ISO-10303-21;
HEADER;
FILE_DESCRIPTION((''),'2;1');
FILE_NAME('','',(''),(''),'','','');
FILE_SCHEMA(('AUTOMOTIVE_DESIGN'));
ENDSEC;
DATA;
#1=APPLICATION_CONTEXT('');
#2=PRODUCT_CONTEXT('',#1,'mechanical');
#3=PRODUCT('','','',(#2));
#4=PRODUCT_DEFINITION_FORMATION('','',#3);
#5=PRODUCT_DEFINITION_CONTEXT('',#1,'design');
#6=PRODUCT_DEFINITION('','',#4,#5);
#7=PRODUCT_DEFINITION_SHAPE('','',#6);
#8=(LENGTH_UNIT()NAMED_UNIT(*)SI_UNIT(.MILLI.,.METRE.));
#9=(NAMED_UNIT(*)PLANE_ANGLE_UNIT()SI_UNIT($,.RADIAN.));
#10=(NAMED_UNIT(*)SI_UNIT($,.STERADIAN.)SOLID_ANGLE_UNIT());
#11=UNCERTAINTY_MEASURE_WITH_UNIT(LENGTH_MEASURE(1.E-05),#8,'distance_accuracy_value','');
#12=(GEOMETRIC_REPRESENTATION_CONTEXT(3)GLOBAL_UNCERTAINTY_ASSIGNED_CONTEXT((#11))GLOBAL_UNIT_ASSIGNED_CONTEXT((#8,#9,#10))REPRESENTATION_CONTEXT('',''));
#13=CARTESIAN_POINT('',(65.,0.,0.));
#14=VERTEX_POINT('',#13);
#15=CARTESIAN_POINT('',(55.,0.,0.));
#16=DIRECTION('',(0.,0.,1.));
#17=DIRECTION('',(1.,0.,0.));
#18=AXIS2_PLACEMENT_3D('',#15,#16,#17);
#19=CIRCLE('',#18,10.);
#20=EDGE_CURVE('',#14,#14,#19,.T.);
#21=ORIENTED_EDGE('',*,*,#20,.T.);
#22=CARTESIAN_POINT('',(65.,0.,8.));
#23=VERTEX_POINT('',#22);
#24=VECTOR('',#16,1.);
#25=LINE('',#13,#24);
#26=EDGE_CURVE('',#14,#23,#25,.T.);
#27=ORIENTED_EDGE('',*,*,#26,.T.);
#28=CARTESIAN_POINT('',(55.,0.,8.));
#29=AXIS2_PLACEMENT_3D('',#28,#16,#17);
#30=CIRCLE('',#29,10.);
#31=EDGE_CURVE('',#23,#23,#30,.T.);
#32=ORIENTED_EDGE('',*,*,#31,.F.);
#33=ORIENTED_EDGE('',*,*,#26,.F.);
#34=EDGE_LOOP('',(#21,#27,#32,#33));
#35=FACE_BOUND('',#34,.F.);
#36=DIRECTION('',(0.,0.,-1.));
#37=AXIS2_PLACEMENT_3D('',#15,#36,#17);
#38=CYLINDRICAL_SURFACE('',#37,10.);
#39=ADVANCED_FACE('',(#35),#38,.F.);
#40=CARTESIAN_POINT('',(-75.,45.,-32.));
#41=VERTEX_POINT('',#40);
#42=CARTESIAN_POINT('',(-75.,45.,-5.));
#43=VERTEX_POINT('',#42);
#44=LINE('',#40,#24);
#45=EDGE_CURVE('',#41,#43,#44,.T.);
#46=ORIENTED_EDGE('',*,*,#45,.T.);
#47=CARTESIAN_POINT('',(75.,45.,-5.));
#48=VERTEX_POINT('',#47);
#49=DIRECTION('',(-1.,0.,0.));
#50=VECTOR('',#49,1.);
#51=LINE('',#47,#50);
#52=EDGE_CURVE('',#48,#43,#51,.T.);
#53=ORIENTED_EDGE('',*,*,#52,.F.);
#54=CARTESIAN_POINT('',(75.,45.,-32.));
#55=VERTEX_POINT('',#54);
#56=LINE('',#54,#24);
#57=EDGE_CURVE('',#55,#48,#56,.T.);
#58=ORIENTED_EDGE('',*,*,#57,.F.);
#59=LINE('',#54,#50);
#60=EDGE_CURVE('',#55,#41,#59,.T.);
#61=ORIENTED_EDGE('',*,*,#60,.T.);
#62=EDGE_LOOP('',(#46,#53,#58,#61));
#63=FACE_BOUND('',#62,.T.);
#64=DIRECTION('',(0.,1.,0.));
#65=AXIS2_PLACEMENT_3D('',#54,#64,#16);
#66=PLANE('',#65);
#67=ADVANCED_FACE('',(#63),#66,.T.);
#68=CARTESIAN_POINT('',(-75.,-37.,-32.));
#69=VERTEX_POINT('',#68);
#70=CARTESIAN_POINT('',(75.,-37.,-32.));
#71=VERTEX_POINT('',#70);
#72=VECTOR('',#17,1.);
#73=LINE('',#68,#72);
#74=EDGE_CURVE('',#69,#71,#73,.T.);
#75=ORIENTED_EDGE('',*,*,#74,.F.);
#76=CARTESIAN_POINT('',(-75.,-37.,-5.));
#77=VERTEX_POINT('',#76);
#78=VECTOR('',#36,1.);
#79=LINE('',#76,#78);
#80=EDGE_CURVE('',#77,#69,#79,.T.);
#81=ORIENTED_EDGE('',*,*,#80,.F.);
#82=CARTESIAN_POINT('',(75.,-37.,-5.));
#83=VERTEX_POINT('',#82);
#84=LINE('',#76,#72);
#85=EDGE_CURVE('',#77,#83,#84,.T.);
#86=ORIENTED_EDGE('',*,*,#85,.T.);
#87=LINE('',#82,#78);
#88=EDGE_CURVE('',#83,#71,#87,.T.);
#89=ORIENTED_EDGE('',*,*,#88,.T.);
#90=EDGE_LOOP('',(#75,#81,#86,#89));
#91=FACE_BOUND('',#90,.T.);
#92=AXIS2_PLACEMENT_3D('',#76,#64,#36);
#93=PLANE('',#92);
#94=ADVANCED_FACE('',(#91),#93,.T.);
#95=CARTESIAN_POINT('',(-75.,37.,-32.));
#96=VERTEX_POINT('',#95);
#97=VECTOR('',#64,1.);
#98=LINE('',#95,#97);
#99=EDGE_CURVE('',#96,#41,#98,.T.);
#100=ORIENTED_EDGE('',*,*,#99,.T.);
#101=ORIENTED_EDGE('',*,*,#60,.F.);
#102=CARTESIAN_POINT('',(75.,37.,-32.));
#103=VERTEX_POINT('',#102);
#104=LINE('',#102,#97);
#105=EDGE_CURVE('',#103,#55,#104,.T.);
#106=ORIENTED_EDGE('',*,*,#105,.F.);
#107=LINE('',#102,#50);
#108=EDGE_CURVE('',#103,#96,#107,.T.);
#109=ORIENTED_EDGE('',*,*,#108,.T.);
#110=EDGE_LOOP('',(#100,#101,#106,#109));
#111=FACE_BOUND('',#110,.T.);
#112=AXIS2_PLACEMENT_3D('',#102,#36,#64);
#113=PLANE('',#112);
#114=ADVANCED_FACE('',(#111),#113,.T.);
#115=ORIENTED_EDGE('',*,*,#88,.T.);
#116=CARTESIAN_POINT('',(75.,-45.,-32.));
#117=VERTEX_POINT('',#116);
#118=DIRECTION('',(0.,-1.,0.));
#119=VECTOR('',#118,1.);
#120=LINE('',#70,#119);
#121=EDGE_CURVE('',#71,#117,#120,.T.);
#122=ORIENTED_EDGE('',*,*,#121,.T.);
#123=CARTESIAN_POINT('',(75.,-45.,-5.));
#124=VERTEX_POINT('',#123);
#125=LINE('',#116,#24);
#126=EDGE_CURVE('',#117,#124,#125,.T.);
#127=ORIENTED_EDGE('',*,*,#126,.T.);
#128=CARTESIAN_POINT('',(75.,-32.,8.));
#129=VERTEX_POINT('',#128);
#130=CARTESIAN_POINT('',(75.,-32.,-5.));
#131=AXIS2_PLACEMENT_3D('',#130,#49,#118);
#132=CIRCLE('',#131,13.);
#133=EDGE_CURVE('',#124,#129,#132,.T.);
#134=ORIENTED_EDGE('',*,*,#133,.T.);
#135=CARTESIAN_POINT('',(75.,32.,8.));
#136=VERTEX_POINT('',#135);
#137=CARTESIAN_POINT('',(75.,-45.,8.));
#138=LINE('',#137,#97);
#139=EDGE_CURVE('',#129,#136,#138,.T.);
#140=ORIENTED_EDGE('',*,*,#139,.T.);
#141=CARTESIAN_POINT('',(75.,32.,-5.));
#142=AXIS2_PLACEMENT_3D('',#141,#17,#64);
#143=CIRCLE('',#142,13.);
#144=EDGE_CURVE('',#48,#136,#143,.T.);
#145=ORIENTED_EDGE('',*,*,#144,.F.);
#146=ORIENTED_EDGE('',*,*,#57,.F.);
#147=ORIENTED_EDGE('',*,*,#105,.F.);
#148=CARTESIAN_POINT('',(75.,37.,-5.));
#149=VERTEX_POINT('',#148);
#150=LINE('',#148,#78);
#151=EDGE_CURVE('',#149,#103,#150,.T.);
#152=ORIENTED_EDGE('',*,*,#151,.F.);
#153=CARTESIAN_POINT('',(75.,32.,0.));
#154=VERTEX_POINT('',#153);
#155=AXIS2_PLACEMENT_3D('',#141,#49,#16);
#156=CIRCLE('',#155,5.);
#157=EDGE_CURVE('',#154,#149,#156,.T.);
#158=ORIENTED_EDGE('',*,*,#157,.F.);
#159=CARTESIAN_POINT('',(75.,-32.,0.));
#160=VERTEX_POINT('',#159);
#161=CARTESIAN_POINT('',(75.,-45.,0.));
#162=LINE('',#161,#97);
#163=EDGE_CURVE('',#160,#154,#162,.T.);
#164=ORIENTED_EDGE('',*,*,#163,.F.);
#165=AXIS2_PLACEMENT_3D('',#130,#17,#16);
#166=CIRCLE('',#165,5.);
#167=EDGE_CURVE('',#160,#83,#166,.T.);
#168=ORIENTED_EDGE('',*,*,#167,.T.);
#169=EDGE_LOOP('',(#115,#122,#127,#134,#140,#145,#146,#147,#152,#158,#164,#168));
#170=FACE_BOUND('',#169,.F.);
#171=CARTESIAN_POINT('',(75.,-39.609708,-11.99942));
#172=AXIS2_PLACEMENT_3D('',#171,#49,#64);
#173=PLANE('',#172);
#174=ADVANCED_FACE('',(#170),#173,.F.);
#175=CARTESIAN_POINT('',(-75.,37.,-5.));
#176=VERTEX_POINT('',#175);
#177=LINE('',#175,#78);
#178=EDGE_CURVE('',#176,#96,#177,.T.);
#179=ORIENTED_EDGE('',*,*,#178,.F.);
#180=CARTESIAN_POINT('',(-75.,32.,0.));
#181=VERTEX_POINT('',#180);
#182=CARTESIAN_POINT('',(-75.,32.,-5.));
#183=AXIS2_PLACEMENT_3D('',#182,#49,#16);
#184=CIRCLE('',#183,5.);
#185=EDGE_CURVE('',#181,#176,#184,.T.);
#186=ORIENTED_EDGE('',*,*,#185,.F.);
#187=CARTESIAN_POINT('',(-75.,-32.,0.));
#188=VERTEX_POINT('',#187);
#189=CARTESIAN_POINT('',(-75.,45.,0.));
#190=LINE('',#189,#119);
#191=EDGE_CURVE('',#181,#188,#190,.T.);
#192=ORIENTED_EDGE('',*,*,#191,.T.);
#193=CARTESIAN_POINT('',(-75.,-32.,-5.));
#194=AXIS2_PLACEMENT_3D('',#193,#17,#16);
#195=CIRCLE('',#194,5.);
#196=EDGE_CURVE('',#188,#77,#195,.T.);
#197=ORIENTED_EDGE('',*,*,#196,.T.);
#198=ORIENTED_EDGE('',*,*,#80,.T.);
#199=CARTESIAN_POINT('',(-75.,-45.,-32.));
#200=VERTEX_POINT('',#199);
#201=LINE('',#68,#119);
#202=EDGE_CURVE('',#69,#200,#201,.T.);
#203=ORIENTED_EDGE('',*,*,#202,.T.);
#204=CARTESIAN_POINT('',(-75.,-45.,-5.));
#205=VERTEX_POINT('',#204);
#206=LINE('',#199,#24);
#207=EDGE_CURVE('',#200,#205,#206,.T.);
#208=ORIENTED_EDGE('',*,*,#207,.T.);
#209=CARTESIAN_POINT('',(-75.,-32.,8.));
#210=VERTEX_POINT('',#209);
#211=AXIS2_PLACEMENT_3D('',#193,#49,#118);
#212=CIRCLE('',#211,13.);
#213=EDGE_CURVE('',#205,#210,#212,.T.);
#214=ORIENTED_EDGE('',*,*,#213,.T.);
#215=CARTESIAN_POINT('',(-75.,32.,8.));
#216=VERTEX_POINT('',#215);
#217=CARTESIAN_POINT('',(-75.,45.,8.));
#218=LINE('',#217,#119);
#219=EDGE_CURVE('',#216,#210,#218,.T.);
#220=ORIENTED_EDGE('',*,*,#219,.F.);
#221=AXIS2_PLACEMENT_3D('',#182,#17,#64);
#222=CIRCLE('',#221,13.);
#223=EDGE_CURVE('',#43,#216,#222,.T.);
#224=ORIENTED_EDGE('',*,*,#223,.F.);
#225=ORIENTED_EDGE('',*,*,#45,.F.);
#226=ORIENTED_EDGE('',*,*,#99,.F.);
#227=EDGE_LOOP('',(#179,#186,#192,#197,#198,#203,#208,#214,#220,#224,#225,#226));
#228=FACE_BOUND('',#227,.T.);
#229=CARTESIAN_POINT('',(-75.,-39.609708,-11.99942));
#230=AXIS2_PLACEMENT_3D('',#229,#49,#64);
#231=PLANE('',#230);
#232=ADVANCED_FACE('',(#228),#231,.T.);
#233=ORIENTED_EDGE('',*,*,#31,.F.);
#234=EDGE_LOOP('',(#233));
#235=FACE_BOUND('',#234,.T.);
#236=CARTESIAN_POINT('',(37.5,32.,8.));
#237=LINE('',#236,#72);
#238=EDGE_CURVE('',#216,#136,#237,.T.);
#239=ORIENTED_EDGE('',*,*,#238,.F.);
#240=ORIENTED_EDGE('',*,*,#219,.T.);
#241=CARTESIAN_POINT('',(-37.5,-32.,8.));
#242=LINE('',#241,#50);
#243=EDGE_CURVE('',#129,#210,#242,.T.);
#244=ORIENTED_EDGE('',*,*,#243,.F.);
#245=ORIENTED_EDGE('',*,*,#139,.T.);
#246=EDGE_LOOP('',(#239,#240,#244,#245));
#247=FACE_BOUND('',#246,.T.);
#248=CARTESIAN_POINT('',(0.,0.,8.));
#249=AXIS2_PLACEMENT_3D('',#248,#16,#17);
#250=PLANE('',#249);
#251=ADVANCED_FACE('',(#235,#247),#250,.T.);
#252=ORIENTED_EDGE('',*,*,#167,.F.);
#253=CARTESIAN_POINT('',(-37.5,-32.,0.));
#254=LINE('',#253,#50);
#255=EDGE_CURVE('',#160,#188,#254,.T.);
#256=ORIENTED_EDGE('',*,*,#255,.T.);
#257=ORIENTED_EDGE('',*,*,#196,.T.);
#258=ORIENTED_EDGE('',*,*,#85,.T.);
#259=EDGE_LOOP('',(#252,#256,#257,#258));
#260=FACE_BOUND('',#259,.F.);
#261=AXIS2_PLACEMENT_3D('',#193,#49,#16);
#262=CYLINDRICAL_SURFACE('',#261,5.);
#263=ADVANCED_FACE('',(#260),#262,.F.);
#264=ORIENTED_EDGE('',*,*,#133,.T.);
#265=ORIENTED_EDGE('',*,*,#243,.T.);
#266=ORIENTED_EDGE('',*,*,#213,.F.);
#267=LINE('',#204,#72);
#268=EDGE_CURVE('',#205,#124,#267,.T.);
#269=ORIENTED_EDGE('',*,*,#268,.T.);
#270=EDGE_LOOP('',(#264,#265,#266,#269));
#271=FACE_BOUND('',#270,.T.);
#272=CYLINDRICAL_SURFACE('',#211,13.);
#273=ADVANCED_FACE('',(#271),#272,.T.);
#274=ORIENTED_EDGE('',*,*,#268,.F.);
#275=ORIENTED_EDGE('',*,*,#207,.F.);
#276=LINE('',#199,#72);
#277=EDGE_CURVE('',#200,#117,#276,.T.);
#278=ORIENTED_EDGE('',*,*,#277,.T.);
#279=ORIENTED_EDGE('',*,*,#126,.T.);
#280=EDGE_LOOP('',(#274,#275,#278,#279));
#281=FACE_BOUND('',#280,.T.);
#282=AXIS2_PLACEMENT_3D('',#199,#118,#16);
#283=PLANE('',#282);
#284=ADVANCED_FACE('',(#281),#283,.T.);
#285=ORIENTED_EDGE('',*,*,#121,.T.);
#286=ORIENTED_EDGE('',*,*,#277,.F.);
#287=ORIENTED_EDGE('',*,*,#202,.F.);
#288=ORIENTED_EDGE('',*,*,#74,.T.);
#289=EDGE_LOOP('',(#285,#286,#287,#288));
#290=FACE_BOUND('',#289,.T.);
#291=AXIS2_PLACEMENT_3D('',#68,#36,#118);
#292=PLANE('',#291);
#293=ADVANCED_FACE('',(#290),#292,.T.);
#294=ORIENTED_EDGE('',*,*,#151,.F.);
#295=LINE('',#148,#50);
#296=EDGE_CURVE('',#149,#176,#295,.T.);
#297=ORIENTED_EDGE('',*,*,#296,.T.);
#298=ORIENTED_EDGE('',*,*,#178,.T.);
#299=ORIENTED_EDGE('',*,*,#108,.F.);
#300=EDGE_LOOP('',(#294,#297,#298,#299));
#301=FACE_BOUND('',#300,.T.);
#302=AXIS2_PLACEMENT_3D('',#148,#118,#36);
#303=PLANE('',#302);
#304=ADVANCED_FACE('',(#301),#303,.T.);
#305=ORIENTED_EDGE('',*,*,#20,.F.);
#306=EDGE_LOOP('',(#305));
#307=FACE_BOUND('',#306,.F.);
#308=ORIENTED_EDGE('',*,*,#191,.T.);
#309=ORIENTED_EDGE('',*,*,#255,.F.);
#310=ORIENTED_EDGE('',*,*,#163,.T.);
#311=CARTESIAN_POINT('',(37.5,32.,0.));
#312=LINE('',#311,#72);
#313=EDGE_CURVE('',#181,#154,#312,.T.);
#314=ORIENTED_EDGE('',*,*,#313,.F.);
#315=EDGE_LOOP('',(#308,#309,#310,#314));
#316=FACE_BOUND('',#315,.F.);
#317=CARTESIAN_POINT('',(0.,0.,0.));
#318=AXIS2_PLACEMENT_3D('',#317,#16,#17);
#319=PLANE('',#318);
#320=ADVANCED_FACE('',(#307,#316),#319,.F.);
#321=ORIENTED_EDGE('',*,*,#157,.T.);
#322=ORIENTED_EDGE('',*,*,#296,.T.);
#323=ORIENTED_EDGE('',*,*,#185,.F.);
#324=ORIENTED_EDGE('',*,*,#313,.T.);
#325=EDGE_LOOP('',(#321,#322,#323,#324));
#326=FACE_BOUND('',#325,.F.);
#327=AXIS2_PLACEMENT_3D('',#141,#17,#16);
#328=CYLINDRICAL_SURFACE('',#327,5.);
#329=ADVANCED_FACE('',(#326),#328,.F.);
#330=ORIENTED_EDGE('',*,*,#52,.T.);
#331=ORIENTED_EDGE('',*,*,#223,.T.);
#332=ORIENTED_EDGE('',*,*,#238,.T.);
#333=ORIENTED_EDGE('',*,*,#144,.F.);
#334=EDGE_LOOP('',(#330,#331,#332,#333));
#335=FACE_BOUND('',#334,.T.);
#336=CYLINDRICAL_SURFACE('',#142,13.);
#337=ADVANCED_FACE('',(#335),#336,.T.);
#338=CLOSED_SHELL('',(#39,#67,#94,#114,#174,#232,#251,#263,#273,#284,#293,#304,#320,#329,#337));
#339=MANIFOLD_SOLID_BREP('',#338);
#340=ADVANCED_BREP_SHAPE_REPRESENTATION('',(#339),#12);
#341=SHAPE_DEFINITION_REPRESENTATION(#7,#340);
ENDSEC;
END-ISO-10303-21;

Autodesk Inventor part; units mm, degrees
ref_plane "YZ Plane" through (0, 0, 0) normal (1, 0, 0) x (0, 1, 0)
ref_plane "XZ Plane" through (0, 0, 0) normal (0, 1, 0) x (-1, 0, 0)
ref_plane "XY Plane" through (0, 0, 0) normal (0, 0, 1) x (1, 0, 0)
sketch "Sketch1" plane through (0, 0, 0) normal (0, 0, 1) x (1, 0, 0)
  line L0 (-75, -45) -> (75, -45)
  line L1 (75, -45) -> (75, 45)
  line L2 (75, 45) -> (-75, 45)
  line L3 (-75, 45) -> (-75, -45)
  line L4 (-75, -45) -> (75, 45) construction
  line L5 (75, -45) -> (-75, 45) construction
  circle A0 centre (55, -25) radius 10
  circle A1 centre (55, 25) radius 10
  line L6 (0, 0) -> (75, 0) construction
  circle A2 centre (55, 0) radius 10
  dimension "d0" = 150
  dimension "d1" = 90
  dimension "d23" = 20
  dimension "d25" = 20
  dimension "d26" = 20
extrude "Plate1" add sketch "Sketch1" along normal blind 8 contours L3 L2 L1 L0 | A0 | A1
sketch "Sketch6" plane through (-75, -37, 8) normal (0, -1, 0) x (1, 0, 0)
  line L0 (150, 0) -> (0, 0)
  line L1 (0, 0) -> (0, -40)
  line L2 (0, -40) -> (150, -40)
  line L3 (150, -40) -> (150, 0)
edge flange "Flange2" height 40 angle 90 thickness 8 bend radius 5 thickness toward (0, -1, 0) relief round relief width 8 relief depth 4 corner gap 5 corner form 0 edges at (0, -45, 0) (0, 45, 0) wall of the first edge with corners at (75, -37, 8) (-75, -37, 8) (-75, -37, -32) (75, -37, -32)
bend "Bend2"
corner "Corner2"
equation "\"d26\" = d25"
equation "\"d2\" = Thickness"
equation "\"d30\" = BendReliefWidth"
equation "\"d31\" = BendReliefDepth"
equation "\"d32\" = MinimumRemnant"
equation "\"d33\" = TransitionRadius"
equation "\"d36\" = BendRadius"
equation "\"d37\" = CornerReliefSize"
equation "\"d38\" = GapSize"
equation "\"d39\" = JacobiRadiusSize"
equation "\"BendReliefWidth\" = Thickness"
equation "\"BendReliefDepth\" = 0.5 * Thickness"
equation "\"CornerReliefSize\" = 4 * Thickness"
equation "\"MinimumRemnant\" = 2 * Thickness"
equation "\"TransitionRadius\" = BendRadius"
equation "\"JacobiRadiusSize\" = BendRadius"
equation "\"GapSize\" = Thickness"
equation "\"Thickness\" = 8"
equation "\"BendRadius\" = 5"
properties part number "PRS 940-95 leg floor channel" material "Steel"
